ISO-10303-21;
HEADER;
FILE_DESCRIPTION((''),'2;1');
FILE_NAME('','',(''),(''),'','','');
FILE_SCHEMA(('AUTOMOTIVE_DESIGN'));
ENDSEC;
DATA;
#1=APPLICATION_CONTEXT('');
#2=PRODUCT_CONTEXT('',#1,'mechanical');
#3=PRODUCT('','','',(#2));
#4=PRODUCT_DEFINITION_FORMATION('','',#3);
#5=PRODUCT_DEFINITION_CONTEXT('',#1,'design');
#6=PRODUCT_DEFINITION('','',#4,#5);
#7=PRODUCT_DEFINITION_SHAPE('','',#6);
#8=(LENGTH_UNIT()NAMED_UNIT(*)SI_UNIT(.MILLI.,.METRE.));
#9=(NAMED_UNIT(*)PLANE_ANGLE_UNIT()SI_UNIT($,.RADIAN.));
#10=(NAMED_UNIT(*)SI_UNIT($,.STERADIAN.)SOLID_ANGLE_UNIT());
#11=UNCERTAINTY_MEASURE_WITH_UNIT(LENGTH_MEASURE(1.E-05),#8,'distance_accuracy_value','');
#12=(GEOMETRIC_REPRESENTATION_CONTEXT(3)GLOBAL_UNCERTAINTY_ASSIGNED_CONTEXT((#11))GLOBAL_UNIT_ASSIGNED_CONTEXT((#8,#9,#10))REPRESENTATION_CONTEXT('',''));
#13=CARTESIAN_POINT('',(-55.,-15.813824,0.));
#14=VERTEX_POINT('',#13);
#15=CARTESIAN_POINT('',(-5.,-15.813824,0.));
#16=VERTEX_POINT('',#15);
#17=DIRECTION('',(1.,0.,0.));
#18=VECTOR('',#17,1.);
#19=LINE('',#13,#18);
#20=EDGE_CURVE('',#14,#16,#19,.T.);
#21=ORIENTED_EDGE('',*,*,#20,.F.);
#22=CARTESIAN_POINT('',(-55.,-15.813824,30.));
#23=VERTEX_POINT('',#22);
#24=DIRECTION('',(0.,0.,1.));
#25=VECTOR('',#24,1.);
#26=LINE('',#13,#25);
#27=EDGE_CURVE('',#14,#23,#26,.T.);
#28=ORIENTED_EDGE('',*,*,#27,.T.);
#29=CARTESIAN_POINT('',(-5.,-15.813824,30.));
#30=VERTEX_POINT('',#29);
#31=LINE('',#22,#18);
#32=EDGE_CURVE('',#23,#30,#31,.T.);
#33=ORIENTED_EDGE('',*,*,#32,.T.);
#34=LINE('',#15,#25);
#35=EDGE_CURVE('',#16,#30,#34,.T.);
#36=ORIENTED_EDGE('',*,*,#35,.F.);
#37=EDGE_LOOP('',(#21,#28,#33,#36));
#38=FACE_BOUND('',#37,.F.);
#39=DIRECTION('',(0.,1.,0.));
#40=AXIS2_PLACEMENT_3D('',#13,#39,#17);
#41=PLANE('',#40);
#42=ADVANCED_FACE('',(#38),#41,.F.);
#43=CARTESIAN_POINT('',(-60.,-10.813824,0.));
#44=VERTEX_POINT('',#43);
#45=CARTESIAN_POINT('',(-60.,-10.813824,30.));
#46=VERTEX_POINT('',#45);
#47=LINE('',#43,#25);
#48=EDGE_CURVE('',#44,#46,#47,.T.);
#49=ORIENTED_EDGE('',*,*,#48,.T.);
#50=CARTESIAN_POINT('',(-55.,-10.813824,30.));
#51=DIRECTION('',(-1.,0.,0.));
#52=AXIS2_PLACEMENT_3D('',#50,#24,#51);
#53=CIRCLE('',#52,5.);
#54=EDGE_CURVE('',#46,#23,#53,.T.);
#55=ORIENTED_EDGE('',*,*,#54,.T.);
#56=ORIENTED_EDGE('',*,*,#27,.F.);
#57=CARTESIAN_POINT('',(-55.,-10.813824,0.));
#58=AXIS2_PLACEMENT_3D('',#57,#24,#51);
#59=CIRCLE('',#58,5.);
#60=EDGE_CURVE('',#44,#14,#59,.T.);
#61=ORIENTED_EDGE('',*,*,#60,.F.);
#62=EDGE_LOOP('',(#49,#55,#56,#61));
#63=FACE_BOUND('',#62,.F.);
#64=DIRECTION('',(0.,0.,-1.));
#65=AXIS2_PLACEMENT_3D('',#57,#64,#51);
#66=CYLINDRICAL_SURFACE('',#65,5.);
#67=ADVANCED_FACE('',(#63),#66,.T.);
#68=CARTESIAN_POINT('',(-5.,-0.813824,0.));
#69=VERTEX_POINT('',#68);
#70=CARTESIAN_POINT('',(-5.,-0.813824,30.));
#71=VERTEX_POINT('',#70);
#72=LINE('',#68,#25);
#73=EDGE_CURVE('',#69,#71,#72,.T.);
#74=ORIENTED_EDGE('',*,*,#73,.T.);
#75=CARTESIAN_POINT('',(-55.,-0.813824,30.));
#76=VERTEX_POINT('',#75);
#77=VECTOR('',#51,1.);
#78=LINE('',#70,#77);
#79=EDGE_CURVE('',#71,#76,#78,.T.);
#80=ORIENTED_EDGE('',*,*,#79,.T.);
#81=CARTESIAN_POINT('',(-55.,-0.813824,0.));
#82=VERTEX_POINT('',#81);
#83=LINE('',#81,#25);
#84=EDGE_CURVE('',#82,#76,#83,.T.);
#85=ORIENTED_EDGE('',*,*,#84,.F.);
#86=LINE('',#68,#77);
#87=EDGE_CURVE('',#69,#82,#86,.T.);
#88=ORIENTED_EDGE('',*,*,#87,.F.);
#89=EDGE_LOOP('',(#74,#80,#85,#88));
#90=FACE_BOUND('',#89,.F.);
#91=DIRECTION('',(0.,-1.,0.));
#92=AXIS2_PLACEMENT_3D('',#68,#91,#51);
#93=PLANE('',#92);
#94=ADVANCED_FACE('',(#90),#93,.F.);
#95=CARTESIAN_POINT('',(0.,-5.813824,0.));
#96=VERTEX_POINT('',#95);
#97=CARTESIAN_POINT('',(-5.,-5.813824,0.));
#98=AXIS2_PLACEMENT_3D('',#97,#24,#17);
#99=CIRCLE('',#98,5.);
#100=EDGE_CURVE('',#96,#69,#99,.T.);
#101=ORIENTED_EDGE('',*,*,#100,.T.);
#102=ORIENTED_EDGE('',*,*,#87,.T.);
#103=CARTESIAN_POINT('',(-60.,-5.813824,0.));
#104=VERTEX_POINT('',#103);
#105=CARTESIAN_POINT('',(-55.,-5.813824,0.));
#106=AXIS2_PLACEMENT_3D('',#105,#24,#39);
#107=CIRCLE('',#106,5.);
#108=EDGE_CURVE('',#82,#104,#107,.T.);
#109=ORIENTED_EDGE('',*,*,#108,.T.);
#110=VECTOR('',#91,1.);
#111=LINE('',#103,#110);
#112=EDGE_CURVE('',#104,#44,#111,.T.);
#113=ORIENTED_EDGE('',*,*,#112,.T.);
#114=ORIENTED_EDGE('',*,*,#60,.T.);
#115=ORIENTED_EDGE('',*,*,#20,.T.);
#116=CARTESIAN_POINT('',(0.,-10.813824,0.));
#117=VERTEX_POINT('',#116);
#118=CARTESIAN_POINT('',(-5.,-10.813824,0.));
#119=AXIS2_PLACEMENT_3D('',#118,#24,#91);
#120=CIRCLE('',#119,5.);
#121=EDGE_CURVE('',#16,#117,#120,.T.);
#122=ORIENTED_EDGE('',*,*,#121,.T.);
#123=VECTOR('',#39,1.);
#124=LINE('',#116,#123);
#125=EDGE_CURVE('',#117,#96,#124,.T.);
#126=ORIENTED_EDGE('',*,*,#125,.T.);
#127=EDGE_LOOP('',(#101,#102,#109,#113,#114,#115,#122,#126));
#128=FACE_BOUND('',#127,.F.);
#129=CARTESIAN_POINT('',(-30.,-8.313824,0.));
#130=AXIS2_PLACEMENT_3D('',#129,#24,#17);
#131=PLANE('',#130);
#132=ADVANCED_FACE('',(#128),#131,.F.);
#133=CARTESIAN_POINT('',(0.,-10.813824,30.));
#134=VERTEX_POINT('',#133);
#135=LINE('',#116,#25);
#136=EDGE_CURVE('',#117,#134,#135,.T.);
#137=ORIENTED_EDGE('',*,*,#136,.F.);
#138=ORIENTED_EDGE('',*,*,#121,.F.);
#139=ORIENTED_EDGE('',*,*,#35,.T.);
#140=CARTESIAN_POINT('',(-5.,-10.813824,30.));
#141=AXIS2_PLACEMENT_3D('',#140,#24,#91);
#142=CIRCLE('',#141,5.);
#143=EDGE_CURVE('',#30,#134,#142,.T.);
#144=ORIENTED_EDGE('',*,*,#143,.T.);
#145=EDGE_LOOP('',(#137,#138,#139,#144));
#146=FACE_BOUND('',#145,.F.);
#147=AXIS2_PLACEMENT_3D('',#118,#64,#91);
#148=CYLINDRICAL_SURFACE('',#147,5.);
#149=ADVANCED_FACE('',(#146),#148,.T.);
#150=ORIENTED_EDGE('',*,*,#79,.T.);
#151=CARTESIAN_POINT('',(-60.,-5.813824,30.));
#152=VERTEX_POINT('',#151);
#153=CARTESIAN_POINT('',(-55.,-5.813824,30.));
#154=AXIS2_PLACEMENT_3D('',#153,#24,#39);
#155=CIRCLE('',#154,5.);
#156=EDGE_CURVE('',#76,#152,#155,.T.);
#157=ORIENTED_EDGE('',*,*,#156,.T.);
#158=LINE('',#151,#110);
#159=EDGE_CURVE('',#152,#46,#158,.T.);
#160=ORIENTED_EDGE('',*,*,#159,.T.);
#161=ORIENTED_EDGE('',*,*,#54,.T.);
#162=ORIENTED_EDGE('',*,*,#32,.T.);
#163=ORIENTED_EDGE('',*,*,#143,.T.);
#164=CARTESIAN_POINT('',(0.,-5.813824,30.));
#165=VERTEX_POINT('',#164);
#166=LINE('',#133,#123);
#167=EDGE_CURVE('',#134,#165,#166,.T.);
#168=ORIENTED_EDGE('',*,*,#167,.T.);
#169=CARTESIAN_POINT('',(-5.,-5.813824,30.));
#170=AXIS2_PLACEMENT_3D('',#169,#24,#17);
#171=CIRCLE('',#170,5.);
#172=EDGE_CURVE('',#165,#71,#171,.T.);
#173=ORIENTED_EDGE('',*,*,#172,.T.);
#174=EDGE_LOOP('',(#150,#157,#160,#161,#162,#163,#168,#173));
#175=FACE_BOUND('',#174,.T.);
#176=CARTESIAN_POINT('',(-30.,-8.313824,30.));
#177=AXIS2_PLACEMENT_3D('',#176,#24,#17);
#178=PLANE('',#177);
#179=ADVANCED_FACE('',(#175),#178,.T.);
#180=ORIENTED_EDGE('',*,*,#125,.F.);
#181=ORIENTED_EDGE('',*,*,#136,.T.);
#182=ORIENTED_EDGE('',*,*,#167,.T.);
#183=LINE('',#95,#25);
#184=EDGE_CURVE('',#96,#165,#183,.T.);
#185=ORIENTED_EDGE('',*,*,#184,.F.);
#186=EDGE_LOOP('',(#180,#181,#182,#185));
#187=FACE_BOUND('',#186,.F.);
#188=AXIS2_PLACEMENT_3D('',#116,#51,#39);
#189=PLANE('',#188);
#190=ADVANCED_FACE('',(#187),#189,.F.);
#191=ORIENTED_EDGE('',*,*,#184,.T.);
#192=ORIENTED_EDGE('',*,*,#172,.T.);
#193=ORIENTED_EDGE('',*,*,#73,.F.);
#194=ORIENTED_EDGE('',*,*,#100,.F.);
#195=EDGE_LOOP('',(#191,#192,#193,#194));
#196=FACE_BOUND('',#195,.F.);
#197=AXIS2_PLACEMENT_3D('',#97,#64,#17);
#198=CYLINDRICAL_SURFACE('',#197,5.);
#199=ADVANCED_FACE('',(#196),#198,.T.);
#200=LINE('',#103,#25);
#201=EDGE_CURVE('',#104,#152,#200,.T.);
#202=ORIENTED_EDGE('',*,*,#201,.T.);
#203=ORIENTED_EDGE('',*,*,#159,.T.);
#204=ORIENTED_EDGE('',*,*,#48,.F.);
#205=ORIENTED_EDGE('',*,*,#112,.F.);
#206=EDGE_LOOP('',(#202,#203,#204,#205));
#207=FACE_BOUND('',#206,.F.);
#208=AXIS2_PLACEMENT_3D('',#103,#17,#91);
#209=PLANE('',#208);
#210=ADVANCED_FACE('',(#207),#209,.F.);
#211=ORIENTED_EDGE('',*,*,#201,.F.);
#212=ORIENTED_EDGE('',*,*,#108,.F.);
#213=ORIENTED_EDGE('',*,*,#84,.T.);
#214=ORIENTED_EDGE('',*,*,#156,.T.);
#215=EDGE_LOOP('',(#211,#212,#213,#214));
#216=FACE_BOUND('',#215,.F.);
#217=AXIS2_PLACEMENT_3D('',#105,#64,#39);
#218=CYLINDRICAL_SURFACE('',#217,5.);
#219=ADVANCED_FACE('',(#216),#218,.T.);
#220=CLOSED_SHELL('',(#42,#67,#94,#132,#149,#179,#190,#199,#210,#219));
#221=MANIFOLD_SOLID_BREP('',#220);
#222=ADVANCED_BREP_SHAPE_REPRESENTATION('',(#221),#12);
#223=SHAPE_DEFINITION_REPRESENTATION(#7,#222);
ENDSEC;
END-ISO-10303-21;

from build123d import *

# Parameters (mm, degrees)
F1_DEPTH = 30


# Not quite as in the source:
# - a feature names something its author has since deleted; it is built from what else it names


with BuildPart() as f1:
    # F0 (on Top) → F1 (new body)
    with BuildSketch(Plane.XY):
        with BuildLine():
            Line((0, -10.8138243272), (0, -5.8138243272))
            ThreePointArc((0, -5.8138243272), (-1.4644660941, -2.2782904213), (-5, -0.8138243272))
            Line((-5, -0.8138243272), (-55, -0.8138243272))
            ThreePointArc((-55, -0.8138243272), (-58.5355339059, -2.2782904213), (-60, -5.8138243272))
            Line((-60, -5.8138243272), (-60, -10.8138243272))
            ThreePointArc((-60, -10.8138243272), (-58.5355339059, -14.3493582332), (-55, -15.8138243272))
            Line((-55, -15.8138243272), (-5, -15.8138243272))
            ThreePointArc((-5, -15.8138243272), (-1.4644660941, -14.3493582332), (0, -10.8138243272))
        make_face()
    extrude(amount=F1_DEPTH)


solid = f1.part
